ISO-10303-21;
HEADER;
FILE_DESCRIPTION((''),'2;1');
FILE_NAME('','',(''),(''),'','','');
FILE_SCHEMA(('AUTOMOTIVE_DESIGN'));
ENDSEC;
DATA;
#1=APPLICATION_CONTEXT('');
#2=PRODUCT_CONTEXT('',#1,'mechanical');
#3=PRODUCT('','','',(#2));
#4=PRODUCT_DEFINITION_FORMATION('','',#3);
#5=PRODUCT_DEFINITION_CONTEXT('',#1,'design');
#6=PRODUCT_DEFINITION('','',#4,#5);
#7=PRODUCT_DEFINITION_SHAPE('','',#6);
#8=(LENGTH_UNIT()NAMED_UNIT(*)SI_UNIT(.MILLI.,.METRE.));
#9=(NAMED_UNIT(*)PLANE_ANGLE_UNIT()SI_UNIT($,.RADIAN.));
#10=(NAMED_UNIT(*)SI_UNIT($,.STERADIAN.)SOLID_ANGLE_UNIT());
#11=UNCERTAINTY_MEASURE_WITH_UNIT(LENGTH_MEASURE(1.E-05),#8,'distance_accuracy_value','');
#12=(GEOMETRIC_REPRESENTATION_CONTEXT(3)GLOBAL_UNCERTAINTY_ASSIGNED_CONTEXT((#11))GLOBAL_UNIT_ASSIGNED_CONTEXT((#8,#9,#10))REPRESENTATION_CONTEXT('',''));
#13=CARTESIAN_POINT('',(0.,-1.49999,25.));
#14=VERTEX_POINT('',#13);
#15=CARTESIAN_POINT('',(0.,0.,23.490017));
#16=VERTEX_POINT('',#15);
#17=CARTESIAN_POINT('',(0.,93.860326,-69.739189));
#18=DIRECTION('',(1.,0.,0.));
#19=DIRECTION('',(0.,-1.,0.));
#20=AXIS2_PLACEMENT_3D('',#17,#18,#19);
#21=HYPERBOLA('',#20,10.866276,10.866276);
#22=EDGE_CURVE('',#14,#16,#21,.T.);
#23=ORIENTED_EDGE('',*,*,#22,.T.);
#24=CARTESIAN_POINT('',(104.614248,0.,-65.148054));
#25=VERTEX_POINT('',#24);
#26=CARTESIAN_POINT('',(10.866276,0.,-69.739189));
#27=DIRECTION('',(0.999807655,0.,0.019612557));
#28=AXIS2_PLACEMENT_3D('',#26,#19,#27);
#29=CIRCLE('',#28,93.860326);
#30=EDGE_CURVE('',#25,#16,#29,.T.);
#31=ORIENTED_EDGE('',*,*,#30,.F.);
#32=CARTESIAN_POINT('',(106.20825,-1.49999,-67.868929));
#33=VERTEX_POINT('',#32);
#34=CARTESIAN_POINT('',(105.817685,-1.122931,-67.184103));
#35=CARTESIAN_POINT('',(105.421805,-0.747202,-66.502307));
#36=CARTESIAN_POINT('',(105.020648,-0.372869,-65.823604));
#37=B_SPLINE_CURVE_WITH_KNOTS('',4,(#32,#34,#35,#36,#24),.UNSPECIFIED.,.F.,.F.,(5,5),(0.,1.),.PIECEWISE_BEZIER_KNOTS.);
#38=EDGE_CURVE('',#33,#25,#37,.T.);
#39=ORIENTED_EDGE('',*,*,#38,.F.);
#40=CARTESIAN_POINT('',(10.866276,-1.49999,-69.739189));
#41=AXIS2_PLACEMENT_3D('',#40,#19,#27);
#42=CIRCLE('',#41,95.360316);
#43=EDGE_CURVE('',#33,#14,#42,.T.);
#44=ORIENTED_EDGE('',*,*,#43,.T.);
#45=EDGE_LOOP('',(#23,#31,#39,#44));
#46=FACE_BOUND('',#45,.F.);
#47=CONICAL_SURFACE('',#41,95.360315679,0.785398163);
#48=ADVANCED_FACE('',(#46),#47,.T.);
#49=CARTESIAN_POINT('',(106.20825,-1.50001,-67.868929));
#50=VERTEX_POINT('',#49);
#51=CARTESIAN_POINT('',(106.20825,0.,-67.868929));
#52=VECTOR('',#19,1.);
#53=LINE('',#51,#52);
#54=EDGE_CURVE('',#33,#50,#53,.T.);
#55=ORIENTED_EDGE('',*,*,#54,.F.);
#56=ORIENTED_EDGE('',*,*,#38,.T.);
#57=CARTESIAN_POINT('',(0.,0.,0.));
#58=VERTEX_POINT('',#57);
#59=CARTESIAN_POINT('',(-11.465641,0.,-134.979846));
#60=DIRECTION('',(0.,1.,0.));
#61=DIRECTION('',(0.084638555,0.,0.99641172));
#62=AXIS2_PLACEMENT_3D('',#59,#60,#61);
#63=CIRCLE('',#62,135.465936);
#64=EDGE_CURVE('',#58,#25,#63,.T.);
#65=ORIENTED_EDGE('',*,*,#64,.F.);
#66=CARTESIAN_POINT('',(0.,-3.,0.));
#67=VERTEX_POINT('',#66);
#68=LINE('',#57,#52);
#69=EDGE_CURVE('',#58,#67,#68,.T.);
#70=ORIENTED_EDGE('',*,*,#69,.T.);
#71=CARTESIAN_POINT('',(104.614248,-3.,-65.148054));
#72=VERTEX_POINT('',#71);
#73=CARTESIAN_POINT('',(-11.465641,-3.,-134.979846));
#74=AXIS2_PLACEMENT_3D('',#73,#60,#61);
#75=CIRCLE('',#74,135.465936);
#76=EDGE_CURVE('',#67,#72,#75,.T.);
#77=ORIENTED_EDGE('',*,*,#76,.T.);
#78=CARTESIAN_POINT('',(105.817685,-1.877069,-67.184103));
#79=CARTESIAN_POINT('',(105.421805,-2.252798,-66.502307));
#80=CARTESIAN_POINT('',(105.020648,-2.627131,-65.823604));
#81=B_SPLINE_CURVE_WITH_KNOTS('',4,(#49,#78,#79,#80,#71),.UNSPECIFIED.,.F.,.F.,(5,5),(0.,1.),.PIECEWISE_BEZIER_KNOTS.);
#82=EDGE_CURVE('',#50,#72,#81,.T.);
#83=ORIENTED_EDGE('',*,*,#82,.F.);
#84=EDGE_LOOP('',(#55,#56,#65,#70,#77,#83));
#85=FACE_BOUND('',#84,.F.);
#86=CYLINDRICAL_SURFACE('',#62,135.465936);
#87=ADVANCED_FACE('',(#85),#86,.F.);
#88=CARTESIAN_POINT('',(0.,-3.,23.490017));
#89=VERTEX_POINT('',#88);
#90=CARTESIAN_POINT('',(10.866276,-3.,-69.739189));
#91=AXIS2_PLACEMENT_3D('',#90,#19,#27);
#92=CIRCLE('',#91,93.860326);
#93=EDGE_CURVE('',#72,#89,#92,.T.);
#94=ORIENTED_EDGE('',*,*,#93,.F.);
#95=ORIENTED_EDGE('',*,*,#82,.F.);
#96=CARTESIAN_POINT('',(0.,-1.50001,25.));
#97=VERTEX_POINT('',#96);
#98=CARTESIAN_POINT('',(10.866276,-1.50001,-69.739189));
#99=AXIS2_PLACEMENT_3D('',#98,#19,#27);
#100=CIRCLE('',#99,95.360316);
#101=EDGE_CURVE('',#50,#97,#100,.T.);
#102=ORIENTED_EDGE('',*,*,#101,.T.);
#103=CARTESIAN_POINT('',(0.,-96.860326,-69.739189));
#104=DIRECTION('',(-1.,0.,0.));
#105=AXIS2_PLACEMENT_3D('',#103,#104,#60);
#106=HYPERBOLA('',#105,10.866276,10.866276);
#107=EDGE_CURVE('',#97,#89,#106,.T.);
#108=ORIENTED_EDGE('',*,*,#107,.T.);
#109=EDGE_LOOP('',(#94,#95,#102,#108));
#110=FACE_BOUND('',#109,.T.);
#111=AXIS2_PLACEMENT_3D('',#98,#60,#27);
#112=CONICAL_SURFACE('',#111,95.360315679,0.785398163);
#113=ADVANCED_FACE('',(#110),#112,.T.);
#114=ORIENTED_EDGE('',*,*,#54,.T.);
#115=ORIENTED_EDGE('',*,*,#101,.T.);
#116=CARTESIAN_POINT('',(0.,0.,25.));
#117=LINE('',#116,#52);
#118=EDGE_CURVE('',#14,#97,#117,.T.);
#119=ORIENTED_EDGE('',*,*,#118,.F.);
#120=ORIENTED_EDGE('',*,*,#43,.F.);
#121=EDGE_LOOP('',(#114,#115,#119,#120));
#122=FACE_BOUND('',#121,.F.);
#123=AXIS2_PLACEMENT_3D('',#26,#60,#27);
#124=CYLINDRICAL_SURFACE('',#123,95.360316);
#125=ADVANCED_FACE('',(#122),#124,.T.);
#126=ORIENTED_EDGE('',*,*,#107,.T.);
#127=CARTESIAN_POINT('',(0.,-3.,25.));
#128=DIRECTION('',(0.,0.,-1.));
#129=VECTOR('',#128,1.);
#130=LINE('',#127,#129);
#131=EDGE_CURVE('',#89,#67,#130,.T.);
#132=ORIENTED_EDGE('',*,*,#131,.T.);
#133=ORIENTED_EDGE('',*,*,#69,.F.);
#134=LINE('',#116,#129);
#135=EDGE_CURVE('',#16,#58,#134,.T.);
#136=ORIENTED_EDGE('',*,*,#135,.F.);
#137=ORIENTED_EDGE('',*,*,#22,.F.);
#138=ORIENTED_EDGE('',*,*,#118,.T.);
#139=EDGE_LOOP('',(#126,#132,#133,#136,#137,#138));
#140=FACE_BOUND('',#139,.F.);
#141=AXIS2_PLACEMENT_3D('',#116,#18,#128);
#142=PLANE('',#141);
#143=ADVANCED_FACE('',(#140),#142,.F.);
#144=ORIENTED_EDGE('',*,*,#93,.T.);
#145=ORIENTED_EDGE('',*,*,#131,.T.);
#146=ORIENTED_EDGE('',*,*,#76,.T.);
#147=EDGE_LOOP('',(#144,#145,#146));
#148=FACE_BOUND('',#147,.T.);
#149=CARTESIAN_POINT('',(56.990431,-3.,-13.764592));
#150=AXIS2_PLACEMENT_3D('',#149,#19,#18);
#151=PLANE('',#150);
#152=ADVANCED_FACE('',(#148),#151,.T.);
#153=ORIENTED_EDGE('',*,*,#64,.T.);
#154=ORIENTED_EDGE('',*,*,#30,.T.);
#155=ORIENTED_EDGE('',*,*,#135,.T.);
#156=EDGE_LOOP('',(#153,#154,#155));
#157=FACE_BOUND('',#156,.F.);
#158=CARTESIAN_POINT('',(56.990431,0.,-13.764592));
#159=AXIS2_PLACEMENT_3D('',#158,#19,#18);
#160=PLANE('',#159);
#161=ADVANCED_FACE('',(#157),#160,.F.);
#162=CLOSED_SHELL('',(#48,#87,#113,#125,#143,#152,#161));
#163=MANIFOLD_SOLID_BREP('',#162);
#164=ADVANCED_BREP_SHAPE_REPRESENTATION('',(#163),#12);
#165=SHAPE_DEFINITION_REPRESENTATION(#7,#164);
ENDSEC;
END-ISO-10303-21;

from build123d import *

# Parameters (mm, degrees)
F1_DEPTH = 3
F2_SIZE  = 1.49999


# Not quite as in the source:
# - a fillet or chamfer is up to 0.001 mm smaller than in the source, because OpenCascade refuses the exact size


with BuildPart() as f1:
    # F0 (on Front) → F1 (new body)
    with BuildSketch(Plane.XZ):
        with BuildLine():
            ThreePointArc((0, 0), (61.4781903769, -20.8298692006), (106.2082496532, -67.8689289283))
            ThreePointArc((106.2082496532, -67.8689289283), (73.6372514953, 2.0479582207), (0, 25))
            Line((0, 25), (0, 0))
        make_face()
    extrude(amount=F1_DEPTH)

    # F2 (size 1.5 in the source; OpenCascade refuses exactly that, so slightly less here)
    f2_edges = [f1.edges().sort_by_distance(p)[0] for p in [
        (73.637251, -3, 2.047958),
        (73.637251, 0, 2.047958),
    ]]
    chamfer(f2_edges, length=F2_SIZE)


solid = f1.part
